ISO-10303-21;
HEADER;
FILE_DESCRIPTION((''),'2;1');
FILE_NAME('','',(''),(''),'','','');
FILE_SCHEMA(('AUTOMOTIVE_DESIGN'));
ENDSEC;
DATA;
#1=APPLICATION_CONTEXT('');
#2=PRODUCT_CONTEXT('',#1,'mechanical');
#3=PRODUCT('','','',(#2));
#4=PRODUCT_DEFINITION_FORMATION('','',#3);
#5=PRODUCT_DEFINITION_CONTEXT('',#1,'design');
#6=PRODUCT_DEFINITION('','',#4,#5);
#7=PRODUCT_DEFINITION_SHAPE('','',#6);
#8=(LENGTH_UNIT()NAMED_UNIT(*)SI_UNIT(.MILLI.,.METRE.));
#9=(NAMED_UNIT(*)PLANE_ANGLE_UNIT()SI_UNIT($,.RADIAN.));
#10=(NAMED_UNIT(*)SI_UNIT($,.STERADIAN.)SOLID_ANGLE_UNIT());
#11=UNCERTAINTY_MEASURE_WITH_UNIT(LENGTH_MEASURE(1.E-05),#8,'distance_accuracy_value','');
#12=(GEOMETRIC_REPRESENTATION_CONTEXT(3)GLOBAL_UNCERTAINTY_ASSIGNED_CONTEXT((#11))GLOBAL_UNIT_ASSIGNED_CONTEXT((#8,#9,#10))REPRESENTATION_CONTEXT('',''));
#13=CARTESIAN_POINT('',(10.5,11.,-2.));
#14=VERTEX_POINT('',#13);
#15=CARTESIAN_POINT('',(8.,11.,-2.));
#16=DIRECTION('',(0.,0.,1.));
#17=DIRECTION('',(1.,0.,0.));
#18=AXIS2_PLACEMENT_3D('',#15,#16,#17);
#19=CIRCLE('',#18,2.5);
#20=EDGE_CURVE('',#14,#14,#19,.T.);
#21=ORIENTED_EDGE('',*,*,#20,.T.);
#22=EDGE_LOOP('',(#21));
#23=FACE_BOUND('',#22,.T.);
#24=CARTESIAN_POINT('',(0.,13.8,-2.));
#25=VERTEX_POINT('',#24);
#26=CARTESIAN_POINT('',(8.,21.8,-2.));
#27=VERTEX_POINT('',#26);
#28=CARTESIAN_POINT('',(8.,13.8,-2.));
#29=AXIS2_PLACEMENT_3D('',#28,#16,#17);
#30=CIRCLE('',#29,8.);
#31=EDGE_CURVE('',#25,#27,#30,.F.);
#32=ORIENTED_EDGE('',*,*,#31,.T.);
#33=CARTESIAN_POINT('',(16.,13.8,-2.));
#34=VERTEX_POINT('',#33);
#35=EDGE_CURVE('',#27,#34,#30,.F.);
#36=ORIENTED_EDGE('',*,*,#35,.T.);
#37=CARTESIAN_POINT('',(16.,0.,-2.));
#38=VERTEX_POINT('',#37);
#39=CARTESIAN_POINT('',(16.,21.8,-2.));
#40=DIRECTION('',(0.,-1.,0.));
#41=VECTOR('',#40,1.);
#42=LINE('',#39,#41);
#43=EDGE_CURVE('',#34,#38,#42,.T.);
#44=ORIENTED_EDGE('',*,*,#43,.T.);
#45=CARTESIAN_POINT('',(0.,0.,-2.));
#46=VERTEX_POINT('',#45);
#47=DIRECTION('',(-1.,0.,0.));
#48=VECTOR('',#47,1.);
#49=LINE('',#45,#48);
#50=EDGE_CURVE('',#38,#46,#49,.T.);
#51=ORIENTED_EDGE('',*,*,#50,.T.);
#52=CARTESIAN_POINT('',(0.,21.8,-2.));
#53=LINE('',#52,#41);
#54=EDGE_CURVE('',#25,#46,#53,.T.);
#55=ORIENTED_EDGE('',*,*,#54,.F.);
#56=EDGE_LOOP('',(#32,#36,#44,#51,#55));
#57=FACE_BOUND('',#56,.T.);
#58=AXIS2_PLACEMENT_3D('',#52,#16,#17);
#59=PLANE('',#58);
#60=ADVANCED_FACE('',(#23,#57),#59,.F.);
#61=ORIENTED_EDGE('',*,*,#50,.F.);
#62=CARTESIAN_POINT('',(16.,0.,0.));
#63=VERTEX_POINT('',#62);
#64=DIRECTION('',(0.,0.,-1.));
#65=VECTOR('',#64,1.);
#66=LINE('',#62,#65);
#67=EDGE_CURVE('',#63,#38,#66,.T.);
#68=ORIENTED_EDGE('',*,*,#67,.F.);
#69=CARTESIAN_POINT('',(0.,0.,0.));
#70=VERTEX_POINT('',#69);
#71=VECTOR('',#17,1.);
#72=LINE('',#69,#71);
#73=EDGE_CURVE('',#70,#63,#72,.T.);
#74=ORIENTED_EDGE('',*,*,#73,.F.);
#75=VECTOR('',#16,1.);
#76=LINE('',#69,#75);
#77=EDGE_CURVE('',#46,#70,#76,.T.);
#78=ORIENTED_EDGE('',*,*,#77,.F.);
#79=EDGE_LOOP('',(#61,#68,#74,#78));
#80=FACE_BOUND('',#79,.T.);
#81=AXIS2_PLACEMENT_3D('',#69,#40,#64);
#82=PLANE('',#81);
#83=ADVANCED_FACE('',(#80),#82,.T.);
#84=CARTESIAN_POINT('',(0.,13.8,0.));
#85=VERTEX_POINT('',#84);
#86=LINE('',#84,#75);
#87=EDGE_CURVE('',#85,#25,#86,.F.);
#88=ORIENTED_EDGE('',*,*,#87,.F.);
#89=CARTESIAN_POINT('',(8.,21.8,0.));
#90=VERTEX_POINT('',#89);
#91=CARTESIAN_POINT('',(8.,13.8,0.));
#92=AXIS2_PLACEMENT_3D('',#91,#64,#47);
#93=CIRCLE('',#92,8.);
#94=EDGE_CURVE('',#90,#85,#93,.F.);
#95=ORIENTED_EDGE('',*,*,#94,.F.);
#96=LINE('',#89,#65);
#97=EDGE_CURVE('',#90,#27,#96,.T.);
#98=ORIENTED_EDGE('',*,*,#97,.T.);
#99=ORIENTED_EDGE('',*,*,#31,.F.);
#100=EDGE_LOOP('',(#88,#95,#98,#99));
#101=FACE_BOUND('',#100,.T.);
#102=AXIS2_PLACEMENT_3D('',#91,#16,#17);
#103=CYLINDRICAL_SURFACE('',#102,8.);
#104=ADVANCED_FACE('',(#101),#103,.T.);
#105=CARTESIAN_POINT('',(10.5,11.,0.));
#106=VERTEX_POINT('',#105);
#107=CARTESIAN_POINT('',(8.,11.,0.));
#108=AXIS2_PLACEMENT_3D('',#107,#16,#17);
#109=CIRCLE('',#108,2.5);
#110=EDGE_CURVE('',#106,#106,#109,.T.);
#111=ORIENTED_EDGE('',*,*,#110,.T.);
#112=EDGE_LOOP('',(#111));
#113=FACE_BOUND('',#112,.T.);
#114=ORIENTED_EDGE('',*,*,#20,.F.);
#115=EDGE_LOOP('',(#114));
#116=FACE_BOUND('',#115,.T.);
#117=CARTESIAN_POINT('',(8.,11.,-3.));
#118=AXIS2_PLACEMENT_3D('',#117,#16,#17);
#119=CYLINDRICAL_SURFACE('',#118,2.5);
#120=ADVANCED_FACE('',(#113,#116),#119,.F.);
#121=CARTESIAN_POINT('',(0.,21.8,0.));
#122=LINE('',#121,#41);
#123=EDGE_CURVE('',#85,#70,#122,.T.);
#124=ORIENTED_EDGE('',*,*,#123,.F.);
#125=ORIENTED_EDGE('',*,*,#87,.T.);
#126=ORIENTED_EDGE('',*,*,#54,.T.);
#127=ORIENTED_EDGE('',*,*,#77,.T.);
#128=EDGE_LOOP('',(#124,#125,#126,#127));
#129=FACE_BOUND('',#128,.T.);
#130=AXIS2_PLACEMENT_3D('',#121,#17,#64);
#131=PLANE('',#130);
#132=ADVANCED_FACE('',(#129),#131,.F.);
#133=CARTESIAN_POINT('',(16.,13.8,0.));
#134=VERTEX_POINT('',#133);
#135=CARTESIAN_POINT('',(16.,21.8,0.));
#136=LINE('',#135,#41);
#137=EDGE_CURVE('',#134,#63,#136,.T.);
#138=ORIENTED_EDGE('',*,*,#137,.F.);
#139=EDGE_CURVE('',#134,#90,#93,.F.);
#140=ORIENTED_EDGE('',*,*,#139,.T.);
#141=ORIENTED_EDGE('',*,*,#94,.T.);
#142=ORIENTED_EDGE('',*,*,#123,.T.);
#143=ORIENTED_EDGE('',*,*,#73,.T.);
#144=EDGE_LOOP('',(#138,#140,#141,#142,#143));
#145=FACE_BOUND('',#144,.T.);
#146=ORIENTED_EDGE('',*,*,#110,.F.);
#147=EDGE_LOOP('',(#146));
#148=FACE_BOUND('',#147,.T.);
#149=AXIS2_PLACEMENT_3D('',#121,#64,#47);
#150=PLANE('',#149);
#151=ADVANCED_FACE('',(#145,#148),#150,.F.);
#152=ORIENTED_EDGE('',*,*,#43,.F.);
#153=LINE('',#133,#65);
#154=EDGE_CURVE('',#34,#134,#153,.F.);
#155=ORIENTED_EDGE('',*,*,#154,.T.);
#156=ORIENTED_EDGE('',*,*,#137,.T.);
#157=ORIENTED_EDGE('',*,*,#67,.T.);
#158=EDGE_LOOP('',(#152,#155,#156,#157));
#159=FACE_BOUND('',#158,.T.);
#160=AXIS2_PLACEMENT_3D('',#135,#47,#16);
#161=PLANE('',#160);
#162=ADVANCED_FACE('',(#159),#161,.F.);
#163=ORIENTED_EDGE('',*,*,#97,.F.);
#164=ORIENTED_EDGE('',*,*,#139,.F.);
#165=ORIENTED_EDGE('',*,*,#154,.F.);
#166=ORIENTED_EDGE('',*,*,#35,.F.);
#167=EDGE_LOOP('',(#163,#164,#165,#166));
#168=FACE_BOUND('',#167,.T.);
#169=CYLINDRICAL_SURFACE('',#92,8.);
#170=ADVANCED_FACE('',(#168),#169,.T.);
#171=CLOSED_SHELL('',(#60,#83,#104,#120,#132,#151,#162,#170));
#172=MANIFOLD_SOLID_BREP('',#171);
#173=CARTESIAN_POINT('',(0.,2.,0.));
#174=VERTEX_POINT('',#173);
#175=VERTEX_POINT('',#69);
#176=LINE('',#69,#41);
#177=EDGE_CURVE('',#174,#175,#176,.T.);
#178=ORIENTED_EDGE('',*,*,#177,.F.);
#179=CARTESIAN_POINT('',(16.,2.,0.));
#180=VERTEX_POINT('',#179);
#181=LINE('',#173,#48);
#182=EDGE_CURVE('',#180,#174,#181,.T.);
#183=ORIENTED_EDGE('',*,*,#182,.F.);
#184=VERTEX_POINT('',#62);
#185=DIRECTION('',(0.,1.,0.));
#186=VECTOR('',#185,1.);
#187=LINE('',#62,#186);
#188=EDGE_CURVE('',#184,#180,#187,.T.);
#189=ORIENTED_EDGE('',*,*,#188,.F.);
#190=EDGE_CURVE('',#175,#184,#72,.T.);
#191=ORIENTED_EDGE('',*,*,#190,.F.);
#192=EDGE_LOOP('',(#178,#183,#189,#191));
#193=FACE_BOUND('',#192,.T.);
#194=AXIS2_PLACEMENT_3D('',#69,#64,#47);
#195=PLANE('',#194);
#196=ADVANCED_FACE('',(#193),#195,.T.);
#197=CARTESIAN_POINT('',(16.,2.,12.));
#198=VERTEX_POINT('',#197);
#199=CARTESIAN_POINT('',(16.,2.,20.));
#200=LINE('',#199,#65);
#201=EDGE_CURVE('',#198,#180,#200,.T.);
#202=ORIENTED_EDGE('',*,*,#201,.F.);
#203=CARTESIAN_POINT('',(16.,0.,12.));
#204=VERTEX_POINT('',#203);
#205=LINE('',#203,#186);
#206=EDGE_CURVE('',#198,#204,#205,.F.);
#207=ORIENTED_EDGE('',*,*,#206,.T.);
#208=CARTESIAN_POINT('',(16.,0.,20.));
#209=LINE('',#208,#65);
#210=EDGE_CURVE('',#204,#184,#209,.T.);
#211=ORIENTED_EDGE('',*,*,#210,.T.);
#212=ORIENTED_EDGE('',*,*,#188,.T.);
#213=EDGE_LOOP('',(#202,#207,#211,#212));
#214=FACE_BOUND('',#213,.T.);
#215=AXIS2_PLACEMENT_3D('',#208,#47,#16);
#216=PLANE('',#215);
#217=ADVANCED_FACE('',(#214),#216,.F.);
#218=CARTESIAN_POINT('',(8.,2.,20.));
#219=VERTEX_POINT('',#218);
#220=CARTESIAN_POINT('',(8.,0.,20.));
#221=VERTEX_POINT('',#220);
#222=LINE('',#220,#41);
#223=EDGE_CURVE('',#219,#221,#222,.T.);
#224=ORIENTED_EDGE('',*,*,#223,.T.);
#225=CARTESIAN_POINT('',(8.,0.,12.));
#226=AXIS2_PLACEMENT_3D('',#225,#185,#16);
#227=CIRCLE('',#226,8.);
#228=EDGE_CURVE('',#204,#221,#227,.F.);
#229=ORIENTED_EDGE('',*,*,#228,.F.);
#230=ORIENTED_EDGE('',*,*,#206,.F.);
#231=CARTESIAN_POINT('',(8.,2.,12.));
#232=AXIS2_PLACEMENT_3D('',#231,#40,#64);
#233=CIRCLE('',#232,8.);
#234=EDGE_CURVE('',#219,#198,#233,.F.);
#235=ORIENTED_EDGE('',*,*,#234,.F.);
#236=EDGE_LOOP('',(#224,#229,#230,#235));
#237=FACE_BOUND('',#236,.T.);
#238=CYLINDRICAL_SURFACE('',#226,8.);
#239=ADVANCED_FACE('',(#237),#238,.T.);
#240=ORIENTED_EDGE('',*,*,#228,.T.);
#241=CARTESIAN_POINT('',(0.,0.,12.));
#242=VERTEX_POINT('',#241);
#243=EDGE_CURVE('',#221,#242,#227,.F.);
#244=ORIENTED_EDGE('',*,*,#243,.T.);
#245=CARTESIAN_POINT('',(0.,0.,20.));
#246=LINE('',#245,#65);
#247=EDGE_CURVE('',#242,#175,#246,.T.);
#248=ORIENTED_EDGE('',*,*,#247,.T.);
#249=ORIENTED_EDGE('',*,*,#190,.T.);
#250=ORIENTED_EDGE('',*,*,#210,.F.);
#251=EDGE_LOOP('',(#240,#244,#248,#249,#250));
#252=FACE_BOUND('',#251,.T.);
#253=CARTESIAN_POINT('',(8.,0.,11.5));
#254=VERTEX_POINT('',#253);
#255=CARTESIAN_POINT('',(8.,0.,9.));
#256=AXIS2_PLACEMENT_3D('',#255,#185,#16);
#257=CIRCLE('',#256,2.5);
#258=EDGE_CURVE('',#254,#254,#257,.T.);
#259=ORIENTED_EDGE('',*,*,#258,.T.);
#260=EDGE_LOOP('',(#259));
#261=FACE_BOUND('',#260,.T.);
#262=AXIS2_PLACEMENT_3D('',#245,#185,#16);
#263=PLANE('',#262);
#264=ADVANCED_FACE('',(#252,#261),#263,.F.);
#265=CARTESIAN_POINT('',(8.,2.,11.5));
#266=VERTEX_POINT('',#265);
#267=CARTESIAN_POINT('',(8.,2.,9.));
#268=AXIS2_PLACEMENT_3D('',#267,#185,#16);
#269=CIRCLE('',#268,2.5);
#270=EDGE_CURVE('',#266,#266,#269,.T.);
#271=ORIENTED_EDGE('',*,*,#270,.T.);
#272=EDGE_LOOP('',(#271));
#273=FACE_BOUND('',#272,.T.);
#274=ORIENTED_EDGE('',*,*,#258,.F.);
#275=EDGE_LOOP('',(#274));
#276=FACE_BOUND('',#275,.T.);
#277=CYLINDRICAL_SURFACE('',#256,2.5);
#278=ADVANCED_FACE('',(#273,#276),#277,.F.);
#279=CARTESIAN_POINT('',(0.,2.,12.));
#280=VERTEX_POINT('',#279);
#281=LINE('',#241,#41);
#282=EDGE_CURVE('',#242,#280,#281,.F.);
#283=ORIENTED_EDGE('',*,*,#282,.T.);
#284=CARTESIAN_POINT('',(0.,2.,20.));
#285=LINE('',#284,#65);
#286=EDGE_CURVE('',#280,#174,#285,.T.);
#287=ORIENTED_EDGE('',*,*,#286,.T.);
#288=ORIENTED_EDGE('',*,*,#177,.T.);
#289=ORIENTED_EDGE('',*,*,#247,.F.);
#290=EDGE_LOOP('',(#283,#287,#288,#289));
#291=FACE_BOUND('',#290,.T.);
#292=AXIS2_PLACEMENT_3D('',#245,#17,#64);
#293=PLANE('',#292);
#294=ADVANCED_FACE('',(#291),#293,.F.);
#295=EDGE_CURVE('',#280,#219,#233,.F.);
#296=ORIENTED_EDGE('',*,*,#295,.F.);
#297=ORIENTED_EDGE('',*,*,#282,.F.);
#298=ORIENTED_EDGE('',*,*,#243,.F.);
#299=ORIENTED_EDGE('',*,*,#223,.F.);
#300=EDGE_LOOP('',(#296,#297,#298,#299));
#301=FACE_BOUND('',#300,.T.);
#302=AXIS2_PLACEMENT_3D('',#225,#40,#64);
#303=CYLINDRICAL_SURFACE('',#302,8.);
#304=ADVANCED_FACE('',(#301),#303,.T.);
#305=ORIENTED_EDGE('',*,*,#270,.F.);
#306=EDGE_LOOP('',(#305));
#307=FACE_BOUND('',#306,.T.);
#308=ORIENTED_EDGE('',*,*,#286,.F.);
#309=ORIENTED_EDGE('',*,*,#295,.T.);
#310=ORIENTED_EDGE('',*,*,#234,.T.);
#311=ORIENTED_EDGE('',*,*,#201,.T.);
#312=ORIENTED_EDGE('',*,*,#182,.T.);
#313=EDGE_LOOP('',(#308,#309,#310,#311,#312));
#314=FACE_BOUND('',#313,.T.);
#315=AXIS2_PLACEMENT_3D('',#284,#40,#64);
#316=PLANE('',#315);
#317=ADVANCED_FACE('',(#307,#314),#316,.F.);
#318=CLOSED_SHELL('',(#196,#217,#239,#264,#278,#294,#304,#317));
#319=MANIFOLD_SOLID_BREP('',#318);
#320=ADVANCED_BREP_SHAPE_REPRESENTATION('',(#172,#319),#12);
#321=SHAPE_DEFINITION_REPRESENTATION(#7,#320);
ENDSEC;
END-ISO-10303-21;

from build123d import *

# Parameters (mm, degrees)
SKETCH_1_W          = 16
SKETCH_1_H          = 2
EXTRUDE_1_DEPTH     = 20
FILLET_1_R          = 8
FILLET_2_R          = 8
SKETCH_2_W          = 16
SKETCH_2_H          = 2
EXTRUDE_2_DEPTH     = 21.8
FILLET_3_R          = 8
FILLET_4_R          = 8
SKETCH_4_R          = 2.5
CUT_EXTRUDE_2_DEPTH = 2
SKETCH_6_R          = 2.5
CUT_EXTRUDE_3_DEPTH = 3


with BuildPart() as part:
    # 草图1 → 凸台-拉伸1 (new body)
    with BuildSketch(Plane.XY):
        with Locations((8, 1)):
            Rectangle(SKETCH_1_W, SKETCH_1_H)
    extrude(amount=EXTRUDE_1_DEPTH)

    # 圆角1
    fillet_1_edges = [part.edges().sort_by_distance(p)[0] for p in [
        (0, 1, 20),
    ]]
    fillet(fillet_1_edges, radius=FILLET_1_R)

    # 圆角2
    fillet_2_edges = [part.edges().sort_by_distance(p)[0] for p in [
        (16, 1, 20),
    ]]
    fillet(fillet_2_edges, radius=FILLET_2_R - 0.0001)  # a hair under: the kernel refuses the full size

    # 草图4 → 切除-拉伸2 (cut)
    with BuildSketch(Plane(origin=(0, 2, 0), x_dir=(1, 0, 0), z_dir=(0, 1, 0))):
        with Locations(Location((8, -9, 0), (0, 0, 270))):
            Circle(SKETCH_4_R)
    extrude(amount=-CUT_EXTRUDE_2_DEPTH, mode=Mode.SUBTRACT)


with BuildPart() as body_2:
    # 草图2 → 凸台-拉伸2 (new body)
    with BuildSketch(Plane(origin=(0, 0, 0), x_dir=(1, 0, 0), z_dir=(0, 1, 0))):
        with Locations((8, 1)):
            Rectangle(SKETCH_2_W, SKETCH_2_H)
    extrude(amount=EXTRUDE_2_DEPTH)

    # 圆角3
    fillet_3_edges = [body_2.edges().sort_by_distance(p)[0] for p in [
        (16, 21.8, -1),
    ]]
    fillet(fillet_3_edges, radius=FILLET_3_R)

    # 圆角4
    fillet_4_edges = [body_2.edges().sort_by_distance(p)[0] for p in [
        (0, 21.8, -1),
    ]]
    fillet(fillet_4_edges, radius=FILLET_4_R - 0.0001)  # a hair under: the kernel refuses the full size

    # 草图6 → 切除-拉伸3 (cut)
    with BuildSketch(Plane.XY):
        with Locations((8, 11)):
            Circle(SKETCH_6_R)
    extrude(amount=-CUT_EXTRUDE_3_DEPTH, mode=Mode.SUBTRACT)


solid = Compound([part.part, body_2.part])
